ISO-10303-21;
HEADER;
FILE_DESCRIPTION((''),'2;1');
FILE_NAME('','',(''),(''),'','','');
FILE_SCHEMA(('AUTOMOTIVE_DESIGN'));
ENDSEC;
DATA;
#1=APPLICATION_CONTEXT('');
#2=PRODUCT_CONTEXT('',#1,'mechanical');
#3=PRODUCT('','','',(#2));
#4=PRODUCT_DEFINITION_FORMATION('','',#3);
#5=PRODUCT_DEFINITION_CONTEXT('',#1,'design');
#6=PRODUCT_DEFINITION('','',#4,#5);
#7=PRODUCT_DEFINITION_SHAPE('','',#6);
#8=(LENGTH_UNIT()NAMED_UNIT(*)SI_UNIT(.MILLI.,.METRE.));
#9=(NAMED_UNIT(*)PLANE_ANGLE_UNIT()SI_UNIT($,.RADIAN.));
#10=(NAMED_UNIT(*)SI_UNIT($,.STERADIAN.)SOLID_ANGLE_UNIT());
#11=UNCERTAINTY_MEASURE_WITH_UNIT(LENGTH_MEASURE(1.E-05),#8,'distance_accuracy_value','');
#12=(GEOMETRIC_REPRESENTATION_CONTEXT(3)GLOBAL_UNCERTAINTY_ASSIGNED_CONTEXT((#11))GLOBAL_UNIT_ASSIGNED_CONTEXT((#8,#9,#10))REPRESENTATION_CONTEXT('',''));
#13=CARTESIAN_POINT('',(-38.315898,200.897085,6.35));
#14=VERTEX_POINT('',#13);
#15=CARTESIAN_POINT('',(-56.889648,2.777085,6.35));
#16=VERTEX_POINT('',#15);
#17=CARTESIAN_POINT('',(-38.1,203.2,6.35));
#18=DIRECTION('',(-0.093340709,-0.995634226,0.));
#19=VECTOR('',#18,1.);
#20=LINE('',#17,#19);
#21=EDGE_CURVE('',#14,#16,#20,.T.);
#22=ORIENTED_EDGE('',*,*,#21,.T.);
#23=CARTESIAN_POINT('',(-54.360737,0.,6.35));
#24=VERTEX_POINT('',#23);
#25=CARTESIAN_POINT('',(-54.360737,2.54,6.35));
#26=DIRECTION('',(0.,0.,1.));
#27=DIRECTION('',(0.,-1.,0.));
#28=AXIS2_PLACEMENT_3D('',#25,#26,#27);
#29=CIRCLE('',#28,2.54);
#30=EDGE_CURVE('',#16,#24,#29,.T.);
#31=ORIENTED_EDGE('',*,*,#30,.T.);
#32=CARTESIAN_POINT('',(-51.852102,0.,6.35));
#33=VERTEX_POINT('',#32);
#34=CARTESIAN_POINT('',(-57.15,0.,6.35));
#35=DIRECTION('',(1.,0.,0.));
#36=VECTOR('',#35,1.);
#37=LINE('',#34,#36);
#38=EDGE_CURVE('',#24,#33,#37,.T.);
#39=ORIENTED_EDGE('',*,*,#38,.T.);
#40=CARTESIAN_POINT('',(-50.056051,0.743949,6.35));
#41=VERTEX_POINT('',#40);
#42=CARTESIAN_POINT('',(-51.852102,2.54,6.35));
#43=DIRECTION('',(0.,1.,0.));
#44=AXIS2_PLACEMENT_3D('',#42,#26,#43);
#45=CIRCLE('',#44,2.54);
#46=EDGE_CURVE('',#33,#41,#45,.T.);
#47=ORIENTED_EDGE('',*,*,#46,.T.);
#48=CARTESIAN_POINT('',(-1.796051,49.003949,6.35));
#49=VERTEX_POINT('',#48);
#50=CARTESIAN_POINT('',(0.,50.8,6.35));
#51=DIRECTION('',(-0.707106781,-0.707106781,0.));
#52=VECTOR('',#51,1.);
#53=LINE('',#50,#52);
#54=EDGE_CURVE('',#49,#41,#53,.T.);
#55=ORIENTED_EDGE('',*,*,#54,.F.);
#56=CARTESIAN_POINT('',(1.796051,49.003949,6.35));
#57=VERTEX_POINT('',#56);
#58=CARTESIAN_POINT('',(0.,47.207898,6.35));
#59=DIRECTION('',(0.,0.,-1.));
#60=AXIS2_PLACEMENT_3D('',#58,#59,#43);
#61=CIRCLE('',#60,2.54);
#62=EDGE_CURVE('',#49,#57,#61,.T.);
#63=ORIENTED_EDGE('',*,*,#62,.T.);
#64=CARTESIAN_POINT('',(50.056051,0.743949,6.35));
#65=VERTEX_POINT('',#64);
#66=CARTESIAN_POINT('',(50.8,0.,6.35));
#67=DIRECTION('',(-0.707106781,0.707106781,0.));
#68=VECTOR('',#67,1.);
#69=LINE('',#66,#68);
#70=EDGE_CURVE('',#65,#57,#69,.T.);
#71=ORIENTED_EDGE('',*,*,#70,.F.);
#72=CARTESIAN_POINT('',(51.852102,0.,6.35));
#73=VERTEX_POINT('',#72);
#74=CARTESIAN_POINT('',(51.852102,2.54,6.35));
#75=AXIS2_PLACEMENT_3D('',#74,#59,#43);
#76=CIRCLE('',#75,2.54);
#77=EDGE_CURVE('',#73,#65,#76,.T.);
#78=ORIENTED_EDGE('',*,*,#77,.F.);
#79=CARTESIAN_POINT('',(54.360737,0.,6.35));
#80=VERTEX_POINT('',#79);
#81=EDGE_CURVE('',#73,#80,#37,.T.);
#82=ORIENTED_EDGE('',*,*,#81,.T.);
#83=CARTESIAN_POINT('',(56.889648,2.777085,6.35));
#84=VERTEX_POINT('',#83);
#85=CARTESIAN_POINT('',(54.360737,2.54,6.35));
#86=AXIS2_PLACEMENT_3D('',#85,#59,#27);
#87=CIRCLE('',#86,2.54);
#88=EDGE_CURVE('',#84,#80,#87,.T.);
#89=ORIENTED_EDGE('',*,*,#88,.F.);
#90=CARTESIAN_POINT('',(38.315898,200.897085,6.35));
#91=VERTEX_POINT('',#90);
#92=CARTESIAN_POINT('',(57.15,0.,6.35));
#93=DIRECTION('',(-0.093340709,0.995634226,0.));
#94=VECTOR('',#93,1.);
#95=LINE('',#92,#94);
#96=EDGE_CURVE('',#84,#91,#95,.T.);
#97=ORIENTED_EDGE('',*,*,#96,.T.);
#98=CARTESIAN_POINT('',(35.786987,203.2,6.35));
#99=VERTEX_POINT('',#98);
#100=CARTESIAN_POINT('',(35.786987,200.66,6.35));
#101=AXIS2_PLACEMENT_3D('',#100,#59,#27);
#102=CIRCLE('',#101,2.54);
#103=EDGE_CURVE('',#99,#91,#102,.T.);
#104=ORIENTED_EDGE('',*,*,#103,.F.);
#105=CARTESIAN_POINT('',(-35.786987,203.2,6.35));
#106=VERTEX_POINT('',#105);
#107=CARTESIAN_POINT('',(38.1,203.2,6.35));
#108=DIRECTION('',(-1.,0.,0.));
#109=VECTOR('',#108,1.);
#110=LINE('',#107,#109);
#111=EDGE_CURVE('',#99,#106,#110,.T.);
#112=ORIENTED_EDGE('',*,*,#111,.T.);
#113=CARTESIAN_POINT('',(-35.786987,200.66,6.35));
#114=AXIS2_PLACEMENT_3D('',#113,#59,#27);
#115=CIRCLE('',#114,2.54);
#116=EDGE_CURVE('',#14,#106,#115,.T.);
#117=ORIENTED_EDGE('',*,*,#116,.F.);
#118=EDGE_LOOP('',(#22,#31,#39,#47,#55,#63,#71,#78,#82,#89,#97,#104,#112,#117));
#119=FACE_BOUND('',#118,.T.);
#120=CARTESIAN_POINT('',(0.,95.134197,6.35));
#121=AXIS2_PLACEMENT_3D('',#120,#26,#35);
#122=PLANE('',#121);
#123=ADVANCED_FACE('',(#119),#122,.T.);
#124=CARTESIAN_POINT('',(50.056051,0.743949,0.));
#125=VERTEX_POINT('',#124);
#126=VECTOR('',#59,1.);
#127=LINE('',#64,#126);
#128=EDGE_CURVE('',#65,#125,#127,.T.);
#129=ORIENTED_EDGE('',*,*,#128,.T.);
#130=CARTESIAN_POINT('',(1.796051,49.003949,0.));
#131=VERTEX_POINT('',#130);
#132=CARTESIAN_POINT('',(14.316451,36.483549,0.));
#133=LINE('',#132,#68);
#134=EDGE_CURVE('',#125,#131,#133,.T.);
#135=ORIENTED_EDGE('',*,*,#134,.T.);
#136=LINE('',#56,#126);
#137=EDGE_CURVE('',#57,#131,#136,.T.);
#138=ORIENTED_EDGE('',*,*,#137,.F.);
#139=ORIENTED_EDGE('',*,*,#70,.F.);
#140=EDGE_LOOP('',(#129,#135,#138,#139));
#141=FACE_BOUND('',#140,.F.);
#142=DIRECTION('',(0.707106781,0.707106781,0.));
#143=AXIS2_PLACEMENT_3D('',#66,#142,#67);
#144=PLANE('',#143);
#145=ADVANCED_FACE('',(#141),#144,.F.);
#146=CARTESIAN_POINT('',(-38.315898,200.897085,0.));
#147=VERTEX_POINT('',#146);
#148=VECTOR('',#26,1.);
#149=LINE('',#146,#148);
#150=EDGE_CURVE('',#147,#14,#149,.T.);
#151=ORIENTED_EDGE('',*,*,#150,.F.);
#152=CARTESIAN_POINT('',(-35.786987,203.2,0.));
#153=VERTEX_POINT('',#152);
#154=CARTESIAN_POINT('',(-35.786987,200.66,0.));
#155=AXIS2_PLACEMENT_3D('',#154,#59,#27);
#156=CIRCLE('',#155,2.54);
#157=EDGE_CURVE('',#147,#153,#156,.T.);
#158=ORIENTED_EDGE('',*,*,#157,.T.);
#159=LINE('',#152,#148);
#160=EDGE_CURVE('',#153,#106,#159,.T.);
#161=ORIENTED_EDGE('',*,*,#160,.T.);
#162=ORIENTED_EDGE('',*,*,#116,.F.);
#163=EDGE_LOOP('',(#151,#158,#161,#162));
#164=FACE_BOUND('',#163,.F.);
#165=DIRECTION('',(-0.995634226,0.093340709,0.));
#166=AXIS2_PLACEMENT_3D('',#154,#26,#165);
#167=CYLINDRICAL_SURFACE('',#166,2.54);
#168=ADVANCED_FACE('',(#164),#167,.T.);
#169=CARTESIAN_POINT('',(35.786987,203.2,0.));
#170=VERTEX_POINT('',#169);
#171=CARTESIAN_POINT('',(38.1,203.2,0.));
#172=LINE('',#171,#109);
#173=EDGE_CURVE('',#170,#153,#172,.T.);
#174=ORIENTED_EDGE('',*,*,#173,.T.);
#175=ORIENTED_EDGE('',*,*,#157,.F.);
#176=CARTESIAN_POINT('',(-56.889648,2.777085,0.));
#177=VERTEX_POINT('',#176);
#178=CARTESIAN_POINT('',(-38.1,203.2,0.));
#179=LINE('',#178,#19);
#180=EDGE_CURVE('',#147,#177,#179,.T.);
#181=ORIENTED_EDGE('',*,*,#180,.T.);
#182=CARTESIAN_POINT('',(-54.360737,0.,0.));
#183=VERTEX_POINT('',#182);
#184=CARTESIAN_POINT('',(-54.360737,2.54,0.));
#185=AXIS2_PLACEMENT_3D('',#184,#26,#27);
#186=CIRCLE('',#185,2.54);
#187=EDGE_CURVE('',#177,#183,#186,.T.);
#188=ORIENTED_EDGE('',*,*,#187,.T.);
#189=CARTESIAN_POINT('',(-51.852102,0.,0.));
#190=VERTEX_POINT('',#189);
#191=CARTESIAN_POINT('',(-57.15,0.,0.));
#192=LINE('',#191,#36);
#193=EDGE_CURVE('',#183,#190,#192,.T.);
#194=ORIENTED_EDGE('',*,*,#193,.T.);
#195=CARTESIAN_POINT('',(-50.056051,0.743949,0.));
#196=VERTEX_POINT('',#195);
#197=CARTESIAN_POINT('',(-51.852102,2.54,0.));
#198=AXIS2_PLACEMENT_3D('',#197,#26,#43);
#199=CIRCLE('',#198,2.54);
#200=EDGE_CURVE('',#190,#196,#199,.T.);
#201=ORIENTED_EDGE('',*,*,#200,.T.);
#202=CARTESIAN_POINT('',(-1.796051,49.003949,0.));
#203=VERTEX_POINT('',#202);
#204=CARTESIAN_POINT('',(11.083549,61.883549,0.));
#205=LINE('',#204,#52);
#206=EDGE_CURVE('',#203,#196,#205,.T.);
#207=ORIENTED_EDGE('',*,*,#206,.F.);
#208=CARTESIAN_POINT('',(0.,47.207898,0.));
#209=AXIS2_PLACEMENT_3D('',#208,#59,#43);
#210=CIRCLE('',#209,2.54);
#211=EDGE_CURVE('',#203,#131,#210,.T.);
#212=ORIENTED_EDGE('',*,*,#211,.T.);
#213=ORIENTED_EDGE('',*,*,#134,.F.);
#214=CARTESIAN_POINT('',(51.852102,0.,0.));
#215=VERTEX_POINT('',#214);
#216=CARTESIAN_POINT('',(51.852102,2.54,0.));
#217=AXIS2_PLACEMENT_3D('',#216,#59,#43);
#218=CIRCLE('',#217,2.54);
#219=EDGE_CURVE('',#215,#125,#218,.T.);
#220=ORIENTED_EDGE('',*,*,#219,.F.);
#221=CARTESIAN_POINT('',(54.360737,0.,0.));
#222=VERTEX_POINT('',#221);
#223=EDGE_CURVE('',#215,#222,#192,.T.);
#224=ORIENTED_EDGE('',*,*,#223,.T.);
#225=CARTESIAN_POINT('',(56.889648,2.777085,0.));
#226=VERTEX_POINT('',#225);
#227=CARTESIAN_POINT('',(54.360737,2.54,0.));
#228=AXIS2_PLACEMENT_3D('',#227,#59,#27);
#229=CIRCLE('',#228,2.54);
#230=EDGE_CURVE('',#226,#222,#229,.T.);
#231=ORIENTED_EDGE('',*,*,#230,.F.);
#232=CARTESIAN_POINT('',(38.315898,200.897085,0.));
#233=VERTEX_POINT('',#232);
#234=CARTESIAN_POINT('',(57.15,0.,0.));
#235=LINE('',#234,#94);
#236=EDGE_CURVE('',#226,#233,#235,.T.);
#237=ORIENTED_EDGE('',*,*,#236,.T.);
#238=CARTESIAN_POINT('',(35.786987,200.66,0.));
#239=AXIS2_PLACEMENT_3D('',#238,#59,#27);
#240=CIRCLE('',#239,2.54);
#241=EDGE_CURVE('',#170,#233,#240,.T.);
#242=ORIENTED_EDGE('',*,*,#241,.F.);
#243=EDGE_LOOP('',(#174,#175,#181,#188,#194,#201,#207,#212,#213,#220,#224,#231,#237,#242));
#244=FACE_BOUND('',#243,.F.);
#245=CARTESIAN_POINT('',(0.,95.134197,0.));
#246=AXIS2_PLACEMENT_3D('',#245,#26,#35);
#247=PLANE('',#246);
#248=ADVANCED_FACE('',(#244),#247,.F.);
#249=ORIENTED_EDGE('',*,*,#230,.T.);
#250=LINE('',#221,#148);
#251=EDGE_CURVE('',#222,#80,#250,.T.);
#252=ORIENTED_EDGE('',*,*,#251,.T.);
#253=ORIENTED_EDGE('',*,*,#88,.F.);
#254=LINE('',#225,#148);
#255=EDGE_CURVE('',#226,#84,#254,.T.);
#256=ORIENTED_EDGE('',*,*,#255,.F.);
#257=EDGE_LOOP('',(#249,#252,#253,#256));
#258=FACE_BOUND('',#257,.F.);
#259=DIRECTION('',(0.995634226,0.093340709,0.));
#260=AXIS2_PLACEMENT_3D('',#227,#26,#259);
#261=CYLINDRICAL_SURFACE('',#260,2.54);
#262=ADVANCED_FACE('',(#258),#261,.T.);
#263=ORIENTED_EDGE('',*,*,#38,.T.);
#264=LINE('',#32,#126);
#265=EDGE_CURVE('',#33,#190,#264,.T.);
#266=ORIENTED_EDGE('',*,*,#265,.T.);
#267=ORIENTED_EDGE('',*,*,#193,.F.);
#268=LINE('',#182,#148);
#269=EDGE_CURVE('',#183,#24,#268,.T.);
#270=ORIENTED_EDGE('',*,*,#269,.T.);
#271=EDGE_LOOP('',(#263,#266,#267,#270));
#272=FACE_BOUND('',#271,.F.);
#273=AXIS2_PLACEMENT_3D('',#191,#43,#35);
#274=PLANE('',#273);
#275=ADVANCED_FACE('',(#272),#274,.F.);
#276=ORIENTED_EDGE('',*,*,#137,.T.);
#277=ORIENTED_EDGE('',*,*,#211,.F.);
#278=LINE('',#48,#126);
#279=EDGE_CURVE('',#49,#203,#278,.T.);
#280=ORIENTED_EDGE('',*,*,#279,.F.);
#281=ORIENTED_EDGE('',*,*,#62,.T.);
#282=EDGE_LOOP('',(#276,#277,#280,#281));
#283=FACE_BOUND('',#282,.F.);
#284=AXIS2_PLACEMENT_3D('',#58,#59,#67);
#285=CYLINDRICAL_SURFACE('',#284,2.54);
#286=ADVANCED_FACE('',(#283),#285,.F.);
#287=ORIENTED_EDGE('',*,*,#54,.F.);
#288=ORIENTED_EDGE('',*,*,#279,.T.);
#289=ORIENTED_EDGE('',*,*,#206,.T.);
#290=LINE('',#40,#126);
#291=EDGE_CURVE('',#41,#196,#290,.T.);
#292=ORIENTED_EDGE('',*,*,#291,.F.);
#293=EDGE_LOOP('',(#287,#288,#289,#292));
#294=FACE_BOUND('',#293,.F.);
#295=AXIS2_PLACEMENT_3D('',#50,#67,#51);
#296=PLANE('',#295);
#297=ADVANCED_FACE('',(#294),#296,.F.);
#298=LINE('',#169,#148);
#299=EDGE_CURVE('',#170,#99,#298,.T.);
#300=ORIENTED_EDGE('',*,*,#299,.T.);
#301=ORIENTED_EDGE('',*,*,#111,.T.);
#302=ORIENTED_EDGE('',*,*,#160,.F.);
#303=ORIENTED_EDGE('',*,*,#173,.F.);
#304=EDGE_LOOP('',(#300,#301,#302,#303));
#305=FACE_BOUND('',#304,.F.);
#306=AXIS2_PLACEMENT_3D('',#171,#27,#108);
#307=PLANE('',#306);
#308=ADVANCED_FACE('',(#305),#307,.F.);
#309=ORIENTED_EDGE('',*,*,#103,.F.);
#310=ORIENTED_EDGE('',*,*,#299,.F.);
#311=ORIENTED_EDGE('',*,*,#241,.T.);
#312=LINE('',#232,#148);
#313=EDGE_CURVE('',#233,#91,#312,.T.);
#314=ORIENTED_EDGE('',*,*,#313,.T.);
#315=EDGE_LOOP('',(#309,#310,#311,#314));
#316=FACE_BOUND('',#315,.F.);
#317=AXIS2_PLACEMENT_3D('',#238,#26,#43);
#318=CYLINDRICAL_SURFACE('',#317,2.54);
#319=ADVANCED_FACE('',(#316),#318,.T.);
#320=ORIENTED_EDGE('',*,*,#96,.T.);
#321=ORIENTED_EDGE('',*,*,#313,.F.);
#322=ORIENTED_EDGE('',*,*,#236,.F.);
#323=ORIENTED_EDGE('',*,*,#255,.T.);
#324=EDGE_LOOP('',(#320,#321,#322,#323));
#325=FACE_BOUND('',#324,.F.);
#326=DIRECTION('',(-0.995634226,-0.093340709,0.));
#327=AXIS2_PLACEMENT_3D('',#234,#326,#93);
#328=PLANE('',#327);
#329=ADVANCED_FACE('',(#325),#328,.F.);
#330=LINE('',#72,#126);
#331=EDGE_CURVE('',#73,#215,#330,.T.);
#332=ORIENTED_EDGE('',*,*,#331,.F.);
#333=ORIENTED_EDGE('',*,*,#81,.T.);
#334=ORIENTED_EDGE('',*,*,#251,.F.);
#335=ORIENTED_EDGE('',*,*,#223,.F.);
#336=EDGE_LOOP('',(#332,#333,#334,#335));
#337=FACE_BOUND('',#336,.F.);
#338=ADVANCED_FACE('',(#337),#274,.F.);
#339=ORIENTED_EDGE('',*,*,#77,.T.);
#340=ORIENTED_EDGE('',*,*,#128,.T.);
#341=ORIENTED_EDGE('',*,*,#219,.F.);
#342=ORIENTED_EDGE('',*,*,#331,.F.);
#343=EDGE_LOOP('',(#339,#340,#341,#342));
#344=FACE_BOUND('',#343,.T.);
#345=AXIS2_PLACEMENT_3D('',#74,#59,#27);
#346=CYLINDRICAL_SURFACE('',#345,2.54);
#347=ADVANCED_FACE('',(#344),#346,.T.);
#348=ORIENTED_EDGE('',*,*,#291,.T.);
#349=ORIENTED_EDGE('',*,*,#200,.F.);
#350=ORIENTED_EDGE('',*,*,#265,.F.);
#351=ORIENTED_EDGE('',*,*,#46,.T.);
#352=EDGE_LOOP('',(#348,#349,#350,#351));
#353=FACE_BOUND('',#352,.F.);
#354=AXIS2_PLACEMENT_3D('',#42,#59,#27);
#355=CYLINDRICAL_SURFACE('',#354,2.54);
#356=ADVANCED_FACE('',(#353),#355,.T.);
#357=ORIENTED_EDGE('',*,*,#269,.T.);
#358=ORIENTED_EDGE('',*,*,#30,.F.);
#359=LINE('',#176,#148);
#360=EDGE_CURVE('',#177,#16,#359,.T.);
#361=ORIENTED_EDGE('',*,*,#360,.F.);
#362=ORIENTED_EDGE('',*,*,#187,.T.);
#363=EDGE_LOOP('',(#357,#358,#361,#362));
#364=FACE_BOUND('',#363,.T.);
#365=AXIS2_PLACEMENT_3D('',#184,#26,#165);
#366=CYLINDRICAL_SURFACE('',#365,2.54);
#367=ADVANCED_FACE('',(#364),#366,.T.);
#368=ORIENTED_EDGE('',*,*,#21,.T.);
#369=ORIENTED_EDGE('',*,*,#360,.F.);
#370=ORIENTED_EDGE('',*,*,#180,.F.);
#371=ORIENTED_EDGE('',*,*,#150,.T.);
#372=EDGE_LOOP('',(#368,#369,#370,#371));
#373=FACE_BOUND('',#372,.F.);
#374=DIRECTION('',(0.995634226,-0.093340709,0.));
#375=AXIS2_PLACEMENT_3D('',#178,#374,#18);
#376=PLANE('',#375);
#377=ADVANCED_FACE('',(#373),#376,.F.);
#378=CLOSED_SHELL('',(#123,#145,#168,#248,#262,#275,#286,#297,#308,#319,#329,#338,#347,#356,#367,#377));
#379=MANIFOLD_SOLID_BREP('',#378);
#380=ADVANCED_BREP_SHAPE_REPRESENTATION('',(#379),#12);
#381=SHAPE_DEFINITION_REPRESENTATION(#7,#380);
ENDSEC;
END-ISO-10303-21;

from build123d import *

# Parameters (mm, degrees)
F1_DEPTH = 6.35
F3_DEPTH = 6.351
F4_R     = 2.54


with BuildPart() as f1:
    # F0 (on Top) → F1 (new body)
    with BuildSketch(Plane.XY):
        Polygon((-38.1, 203.2), (-57.15, 0), (57.15, 0), (38.1, 203.2), align=None)
    extrude(amount=F1_DEPTH)

    # F2 (on face) → F3 (cut, through all)
    with BuildSketch(Plane.XY.offset(6.35)):
        Polygon((0, 50.8), (-50.8, 0), (50.8, 0), align=None)
    extrude(amount=-F3_DEPTH, mode=Mode.SUBTRACT)

    # F4
    f4_edges = [f1.edges().sort_by_distance(p)[0] for p in [
        (-38.1, 203.2, 3.175),
        (38.1, 203.2, 3.175),
        (0, 50.8, 3.175),
        (-50.8, 0, 3.175),
        (-57.15, 0, 3.175),
        (50.8, 0, 3.175),
        (57.15, 0, 3.175),
    ]]
    fillet(f4_edges, radius=F4_R)


solid = f1.part
